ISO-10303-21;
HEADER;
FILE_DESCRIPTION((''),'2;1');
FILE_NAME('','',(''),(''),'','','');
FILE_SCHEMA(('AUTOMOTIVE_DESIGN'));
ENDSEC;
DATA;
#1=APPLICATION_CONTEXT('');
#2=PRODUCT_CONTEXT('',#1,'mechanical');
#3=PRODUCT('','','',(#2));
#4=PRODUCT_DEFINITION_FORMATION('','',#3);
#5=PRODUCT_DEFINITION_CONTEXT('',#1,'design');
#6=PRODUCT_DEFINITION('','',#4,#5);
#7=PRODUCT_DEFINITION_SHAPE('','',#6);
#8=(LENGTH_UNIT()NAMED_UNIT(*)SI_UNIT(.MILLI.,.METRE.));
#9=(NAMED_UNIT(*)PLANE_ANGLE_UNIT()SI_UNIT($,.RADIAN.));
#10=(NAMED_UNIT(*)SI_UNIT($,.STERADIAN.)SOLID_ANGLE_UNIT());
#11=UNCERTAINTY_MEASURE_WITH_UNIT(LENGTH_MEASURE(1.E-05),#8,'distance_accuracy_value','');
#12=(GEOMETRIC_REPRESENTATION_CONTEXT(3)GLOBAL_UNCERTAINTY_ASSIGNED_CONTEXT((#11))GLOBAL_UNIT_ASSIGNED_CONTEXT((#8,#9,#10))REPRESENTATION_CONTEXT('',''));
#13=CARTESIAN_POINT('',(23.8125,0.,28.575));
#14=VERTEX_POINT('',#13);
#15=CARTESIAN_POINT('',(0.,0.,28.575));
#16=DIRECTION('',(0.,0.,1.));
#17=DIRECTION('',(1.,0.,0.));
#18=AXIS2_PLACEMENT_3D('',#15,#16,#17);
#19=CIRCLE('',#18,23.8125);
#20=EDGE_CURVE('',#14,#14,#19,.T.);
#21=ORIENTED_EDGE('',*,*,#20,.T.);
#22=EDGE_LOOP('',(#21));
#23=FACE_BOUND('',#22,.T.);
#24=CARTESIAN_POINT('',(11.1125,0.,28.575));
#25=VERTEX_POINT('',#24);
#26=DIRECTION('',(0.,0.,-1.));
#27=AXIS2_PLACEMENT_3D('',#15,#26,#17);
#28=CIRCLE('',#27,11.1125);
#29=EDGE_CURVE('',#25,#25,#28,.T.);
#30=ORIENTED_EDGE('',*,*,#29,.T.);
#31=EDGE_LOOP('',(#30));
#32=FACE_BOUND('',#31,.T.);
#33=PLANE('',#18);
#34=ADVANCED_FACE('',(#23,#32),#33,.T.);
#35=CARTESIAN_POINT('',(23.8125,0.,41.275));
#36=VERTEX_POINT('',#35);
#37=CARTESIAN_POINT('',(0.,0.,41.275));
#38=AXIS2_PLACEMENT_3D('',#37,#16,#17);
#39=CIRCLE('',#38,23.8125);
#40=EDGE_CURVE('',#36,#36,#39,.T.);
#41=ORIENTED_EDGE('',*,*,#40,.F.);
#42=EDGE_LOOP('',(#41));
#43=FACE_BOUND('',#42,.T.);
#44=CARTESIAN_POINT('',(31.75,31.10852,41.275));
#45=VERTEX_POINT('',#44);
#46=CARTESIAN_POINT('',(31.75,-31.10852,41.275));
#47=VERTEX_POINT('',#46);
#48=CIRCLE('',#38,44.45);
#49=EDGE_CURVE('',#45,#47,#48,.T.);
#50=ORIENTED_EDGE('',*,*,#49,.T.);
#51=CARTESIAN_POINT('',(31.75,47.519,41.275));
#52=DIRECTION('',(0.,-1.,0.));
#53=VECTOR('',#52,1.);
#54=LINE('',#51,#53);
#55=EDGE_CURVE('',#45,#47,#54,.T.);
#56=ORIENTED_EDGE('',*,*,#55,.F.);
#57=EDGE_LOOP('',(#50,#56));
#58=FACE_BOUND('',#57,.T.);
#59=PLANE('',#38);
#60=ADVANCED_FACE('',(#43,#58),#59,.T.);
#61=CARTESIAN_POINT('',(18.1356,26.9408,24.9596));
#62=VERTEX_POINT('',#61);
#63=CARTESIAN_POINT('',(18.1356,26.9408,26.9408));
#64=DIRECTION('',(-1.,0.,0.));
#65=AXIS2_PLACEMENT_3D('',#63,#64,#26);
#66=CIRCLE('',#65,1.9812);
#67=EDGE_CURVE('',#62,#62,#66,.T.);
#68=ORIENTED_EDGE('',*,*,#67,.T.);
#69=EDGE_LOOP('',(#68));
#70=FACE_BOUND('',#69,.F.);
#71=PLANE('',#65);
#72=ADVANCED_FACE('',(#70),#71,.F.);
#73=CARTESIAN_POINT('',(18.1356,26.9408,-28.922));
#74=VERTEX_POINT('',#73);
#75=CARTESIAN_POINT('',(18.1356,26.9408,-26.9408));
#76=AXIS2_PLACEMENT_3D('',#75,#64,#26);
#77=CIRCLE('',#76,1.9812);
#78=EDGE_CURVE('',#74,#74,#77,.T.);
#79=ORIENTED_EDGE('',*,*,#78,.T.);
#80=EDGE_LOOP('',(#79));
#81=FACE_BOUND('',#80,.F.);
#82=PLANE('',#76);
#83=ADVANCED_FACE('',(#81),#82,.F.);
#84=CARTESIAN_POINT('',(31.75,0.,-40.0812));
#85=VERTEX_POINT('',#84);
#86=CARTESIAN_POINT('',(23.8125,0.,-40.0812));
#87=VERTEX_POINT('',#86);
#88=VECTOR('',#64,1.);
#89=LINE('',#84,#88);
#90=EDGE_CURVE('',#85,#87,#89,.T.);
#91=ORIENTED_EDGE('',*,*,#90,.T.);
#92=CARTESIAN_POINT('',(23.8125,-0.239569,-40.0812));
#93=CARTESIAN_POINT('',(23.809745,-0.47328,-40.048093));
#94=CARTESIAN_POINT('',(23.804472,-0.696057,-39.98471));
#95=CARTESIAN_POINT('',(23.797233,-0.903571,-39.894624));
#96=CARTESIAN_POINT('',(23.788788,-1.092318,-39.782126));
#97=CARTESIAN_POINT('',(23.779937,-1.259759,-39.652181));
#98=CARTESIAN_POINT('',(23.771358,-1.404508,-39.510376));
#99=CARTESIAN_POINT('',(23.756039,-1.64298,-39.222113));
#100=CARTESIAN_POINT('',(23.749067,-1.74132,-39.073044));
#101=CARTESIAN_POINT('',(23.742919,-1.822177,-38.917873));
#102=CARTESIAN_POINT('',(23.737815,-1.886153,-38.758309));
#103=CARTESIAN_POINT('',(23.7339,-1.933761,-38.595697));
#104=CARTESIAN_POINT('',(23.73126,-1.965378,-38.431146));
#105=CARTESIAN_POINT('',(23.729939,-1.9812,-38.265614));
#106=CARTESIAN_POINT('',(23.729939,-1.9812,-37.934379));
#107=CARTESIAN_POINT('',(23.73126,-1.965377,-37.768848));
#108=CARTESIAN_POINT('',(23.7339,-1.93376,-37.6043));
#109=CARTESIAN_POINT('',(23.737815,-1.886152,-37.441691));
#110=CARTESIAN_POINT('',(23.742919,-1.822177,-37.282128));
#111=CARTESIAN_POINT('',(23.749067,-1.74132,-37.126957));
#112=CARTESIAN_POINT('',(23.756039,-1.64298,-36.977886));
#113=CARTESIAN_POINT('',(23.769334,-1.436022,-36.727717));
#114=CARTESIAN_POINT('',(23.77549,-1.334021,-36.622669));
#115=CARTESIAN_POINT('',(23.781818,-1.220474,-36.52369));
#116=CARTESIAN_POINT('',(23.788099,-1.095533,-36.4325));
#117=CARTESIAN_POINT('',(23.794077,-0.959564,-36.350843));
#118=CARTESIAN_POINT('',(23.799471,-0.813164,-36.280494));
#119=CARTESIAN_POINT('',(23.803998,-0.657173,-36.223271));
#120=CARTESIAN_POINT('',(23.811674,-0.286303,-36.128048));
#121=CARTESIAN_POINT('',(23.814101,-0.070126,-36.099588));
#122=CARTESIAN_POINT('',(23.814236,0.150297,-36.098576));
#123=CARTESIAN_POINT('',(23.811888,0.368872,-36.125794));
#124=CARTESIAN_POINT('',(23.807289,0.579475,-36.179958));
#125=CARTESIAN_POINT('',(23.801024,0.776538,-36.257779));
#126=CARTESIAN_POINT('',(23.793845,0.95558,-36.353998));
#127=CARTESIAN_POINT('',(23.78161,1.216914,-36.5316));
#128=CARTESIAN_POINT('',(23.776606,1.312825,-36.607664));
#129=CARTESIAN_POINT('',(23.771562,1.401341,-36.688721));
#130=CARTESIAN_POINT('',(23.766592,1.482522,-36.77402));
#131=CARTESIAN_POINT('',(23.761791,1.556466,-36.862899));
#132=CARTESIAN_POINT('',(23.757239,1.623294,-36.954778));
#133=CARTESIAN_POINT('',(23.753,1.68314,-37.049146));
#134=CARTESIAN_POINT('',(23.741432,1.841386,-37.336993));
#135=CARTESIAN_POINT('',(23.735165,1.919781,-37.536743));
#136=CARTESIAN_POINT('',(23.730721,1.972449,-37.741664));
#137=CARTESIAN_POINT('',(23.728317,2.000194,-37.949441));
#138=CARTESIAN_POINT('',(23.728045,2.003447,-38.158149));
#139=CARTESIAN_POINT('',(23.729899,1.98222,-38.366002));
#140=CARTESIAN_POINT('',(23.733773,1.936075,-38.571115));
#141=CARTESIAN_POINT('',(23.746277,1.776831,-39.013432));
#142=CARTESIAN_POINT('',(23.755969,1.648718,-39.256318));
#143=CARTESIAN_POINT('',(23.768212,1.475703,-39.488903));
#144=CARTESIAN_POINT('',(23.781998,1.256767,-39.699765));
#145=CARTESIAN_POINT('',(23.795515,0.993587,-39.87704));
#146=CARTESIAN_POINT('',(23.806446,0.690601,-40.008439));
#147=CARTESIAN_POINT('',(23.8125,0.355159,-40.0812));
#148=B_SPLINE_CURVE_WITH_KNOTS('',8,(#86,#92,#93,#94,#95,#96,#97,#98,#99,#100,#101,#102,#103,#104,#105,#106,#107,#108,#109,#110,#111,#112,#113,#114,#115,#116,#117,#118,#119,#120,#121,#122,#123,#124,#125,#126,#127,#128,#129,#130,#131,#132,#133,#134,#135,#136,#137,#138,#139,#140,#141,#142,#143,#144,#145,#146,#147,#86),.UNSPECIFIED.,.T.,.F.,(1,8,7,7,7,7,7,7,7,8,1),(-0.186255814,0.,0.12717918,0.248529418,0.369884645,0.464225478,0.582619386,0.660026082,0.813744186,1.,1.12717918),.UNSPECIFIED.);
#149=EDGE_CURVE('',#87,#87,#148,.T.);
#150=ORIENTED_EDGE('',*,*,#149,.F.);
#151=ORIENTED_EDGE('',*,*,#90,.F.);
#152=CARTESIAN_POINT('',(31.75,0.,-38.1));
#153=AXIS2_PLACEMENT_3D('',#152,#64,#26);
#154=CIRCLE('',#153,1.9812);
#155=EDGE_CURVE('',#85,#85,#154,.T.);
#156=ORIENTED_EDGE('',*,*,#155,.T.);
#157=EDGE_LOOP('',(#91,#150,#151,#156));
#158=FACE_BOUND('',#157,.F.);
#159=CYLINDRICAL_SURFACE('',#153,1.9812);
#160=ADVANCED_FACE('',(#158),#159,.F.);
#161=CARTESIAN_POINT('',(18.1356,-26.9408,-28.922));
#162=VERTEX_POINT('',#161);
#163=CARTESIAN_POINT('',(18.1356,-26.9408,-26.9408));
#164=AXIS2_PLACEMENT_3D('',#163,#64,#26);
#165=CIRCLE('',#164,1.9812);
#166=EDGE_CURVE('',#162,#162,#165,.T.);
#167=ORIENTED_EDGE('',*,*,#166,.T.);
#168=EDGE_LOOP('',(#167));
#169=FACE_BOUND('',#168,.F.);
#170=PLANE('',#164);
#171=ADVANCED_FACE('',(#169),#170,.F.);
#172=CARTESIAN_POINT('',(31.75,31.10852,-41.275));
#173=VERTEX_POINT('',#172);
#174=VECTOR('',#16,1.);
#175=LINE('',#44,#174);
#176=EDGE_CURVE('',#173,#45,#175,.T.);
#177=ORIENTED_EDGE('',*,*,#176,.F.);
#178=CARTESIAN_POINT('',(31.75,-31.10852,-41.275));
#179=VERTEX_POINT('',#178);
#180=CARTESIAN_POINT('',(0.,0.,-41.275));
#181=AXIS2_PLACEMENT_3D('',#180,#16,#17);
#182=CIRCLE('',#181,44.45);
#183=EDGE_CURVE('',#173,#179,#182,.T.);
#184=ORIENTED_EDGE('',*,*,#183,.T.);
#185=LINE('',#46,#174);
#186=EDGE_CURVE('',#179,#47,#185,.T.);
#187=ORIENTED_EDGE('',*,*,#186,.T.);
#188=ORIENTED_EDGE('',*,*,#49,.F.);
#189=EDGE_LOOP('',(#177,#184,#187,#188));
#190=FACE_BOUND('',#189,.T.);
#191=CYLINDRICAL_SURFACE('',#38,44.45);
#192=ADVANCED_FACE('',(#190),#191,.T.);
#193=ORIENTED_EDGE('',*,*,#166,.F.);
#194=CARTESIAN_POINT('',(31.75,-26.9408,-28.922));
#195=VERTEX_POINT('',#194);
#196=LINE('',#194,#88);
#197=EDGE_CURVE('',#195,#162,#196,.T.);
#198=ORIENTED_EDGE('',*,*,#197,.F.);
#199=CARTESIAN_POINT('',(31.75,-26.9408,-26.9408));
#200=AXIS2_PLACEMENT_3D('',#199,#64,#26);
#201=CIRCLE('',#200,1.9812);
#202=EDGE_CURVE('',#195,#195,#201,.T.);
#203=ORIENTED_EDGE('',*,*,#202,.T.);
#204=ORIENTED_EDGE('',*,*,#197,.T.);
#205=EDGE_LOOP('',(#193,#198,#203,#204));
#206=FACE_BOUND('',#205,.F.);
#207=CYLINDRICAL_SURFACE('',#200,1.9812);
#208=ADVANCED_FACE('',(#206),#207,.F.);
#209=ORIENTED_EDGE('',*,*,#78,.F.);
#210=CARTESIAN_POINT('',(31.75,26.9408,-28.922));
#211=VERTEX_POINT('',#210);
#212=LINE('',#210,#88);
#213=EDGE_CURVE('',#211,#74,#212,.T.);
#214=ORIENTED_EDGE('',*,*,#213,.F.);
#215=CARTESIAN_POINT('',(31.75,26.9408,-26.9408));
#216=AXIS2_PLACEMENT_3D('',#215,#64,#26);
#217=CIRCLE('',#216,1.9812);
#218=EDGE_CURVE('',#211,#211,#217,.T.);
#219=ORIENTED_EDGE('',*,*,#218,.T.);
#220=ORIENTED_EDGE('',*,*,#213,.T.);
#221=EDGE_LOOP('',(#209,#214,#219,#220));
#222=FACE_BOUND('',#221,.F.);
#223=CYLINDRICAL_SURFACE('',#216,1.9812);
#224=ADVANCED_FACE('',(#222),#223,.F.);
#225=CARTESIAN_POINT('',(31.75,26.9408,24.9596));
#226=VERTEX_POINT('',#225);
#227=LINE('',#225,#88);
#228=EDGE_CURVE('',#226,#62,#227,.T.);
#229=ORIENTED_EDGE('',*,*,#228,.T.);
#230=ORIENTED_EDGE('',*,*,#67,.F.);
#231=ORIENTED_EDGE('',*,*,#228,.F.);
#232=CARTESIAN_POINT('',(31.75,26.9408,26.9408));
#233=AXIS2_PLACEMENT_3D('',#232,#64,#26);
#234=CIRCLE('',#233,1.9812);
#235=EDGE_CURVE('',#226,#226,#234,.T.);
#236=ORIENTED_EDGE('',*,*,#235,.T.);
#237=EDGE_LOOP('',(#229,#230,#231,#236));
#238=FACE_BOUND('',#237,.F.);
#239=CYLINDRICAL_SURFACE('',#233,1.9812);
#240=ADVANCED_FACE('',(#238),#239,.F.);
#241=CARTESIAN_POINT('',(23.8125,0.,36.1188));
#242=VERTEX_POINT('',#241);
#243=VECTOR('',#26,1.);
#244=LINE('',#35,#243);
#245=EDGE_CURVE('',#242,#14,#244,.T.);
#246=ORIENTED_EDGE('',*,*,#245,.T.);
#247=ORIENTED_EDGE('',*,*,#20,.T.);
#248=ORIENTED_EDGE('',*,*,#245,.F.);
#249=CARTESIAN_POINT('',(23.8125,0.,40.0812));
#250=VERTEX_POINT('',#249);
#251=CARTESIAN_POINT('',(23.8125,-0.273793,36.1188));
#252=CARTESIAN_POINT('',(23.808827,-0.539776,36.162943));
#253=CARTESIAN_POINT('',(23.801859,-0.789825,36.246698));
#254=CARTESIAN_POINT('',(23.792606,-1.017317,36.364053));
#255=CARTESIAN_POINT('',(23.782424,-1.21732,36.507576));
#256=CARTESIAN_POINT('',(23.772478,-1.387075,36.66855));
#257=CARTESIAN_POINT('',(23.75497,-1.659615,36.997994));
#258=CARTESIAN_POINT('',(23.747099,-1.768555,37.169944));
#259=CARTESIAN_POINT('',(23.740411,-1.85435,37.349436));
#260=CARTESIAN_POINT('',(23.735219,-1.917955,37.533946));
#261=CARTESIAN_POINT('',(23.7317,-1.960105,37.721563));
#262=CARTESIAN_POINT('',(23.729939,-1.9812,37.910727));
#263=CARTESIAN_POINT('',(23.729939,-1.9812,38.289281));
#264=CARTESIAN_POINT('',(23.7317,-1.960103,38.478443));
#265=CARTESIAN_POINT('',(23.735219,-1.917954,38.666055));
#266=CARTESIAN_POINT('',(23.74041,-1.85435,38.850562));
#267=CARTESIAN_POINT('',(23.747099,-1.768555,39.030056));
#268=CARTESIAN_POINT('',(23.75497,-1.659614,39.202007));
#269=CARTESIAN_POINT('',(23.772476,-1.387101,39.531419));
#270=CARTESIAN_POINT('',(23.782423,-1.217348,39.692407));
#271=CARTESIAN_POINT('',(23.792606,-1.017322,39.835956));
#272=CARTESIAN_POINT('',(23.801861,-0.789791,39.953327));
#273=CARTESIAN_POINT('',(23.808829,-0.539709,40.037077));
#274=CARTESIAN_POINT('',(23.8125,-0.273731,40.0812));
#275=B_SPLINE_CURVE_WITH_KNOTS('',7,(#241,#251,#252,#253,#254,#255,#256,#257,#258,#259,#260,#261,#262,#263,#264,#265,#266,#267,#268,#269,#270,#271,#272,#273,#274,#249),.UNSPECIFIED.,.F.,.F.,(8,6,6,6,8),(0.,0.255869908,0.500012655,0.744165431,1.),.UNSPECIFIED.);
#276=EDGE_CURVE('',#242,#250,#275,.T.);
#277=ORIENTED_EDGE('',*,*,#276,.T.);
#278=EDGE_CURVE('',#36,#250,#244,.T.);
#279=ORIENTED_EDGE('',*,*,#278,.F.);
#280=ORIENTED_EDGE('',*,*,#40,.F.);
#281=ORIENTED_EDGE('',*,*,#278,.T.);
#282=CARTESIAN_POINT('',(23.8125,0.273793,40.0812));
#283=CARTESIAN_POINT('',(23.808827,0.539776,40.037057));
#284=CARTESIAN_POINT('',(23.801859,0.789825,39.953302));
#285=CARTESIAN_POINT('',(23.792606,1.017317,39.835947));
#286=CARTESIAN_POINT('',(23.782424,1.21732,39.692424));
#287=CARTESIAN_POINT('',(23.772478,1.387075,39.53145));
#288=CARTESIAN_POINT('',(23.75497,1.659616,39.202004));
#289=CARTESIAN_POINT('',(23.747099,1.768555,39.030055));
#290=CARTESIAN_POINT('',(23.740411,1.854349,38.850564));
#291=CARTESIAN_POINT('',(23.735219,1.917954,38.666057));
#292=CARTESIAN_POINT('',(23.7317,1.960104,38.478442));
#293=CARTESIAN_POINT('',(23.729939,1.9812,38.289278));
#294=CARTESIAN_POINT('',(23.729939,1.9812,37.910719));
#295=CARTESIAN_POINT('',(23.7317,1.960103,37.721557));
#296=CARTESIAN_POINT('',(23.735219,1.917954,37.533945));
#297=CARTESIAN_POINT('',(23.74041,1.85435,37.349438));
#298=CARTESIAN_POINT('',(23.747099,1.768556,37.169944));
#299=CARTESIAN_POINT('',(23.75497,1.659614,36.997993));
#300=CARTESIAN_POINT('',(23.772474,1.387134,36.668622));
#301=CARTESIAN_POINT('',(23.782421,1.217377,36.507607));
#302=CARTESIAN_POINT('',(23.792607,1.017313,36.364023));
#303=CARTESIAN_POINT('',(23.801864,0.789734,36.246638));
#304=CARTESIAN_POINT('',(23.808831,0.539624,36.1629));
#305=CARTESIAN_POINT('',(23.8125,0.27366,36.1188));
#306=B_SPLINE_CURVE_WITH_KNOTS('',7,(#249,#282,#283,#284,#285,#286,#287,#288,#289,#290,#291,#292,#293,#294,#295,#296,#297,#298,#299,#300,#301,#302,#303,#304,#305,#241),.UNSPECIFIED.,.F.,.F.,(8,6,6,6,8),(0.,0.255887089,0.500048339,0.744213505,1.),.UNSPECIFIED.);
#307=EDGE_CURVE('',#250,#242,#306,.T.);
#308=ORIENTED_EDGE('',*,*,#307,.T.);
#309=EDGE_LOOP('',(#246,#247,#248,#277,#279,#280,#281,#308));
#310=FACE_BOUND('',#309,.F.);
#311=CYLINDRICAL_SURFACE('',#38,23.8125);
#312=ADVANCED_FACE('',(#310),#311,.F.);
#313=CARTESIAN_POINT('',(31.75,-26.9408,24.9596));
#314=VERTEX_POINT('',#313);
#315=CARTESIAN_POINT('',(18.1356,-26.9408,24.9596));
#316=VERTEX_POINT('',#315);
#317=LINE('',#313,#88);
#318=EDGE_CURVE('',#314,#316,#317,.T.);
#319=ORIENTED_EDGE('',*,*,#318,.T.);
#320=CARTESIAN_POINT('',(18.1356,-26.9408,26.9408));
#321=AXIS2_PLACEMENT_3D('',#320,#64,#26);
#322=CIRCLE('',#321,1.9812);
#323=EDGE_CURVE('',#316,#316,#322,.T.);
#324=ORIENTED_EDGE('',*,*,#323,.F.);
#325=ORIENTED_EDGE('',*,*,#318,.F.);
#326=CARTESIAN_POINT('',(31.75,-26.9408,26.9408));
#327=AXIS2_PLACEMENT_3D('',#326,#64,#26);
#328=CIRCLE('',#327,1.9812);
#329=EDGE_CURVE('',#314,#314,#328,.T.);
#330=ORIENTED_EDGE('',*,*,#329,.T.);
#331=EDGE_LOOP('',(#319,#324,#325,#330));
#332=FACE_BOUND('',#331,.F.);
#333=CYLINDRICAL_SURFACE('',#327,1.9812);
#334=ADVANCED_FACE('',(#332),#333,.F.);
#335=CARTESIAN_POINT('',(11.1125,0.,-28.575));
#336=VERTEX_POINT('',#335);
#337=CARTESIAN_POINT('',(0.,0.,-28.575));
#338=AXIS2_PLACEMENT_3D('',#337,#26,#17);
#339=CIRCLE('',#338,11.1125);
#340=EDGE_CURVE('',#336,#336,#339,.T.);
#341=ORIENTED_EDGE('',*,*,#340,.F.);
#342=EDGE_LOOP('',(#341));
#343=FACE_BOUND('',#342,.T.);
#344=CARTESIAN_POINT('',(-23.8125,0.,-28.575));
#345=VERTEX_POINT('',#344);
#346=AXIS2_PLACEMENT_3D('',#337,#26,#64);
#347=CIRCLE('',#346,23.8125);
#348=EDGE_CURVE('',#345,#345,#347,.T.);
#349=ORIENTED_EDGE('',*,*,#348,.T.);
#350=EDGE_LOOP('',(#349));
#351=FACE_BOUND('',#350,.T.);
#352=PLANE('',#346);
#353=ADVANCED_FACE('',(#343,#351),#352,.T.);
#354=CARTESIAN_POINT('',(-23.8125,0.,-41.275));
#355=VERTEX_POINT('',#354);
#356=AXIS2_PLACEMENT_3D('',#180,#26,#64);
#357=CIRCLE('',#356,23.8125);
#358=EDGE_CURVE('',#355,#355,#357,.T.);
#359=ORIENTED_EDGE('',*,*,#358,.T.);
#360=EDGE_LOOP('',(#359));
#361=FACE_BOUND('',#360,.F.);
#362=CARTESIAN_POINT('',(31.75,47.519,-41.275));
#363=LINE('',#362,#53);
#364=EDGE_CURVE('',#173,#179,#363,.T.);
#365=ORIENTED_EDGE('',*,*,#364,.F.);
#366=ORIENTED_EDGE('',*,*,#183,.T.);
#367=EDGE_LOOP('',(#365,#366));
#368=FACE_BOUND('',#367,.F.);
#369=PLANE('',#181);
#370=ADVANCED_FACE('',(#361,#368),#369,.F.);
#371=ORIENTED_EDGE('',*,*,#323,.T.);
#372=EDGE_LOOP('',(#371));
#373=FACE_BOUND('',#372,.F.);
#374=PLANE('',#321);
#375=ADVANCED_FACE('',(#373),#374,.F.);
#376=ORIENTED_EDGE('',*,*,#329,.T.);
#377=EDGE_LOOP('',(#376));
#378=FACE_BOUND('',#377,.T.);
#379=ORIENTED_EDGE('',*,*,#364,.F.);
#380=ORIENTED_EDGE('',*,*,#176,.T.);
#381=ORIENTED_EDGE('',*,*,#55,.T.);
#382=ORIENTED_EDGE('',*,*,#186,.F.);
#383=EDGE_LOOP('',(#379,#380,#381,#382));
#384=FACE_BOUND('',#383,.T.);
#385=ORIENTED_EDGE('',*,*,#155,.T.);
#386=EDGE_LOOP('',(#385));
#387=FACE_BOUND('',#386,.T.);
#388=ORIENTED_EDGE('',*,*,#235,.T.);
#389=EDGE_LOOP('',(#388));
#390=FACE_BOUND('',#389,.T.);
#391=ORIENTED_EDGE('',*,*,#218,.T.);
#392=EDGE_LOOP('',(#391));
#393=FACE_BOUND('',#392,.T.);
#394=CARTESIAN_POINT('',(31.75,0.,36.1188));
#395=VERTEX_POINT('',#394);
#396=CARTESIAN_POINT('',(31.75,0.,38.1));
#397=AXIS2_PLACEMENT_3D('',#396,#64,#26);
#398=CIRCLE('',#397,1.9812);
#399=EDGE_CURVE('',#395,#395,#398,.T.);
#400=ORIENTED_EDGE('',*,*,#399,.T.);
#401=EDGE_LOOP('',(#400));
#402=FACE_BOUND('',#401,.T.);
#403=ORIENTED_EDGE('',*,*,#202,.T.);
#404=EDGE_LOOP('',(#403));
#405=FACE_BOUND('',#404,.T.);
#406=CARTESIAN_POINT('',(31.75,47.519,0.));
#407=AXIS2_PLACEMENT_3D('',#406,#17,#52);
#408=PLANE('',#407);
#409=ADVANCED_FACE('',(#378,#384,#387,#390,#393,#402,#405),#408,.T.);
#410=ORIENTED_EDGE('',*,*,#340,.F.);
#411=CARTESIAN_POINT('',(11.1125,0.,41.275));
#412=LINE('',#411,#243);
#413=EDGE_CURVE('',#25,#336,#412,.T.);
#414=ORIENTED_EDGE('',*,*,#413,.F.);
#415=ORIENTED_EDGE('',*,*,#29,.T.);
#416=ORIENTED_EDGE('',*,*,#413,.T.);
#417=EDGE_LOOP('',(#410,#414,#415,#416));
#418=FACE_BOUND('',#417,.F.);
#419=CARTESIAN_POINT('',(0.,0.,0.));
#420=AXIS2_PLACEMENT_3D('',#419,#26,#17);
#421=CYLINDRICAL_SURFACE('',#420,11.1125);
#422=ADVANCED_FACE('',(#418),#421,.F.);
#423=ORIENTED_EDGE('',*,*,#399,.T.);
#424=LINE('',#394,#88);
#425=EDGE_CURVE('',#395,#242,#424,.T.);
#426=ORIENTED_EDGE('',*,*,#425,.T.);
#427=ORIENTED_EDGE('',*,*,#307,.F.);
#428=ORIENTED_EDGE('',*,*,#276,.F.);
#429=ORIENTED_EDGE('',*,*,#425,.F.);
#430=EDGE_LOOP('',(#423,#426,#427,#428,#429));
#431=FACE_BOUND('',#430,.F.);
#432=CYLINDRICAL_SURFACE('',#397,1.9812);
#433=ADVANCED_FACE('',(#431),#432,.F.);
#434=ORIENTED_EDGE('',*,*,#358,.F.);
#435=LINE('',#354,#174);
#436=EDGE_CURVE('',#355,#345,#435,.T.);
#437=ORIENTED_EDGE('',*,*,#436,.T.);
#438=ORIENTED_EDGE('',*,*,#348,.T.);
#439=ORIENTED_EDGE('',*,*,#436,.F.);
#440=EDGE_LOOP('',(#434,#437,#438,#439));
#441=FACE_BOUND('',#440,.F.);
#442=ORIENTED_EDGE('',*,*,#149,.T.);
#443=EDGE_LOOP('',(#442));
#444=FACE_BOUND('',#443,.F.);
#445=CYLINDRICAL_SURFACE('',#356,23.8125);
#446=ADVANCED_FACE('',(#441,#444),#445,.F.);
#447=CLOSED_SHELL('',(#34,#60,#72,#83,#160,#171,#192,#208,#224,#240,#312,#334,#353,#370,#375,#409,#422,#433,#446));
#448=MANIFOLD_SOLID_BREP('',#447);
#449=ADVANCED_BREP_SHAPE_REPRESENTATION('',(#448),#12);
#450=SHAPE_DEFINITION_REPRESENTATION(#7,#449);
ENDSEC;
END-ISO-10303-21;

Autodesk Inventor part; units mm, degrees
ref_plane "YZ Plane" through (0, 0, 0) normal (1, 0, 0) x (0, 1, 0)
ref_plane "XZ Plane" through (0, 0, 0) normal (0, 1, 0) x (-1, 0, 0)
ref_plane "XY Plane" through (0, 0, 0) normal (0, 0, 1) x (1, 0, 0)
sketch "Sketch1" plane through (0, 0, 0) normal (0, 0, 1) x (1, 0, 0)
  circle A0 centre (0, 0) radius 11.1125
  circle A1 centre (0, 0) radius 57.15 construction
  line L0 (29.571, 44.45) -> (35.921, 44.45) construction
  line L1 (35.921, 44.45) -> (35.921, -44.45) construction
  line L2 (35.921, -44.45) -> (29.571, -44.45) construction
  line L3 (29.571, -44.45) -> (29.571, 44.45) construction
  line L4 (31.75, 47.519) -> (31.75, -47.519)
  arc A2 (31.75, 47.519) -> (31.75, -47.519) centre (0, 0) ccw
  point P0 (29.571, 0)
  point P1 (57.15, 0)
  point P2 (35.921, 0)
  dimension "d0" = 22.225
  dimension "d2" = 114.3
  dimension "d3" = 88.9
  dimension "d4" = 6.35
  dimension "d5" = 35.921
  dimension "d6" = 21.229
  dimension "d7" = 31.75
extrude "Extrusion1" add sketch "Sketch1" along normal mid plane 82.55
sketch "Sketch3" plane through (0, 0, 41.275) normal (0, 0, 1) x (1, 0, 0)
  circle A0 centre (0, 0) radius 11.1125 construction
  arc A1 (31.75, 47.519) -> (31.75, -47.519) centre (0, 0) ccw construction
  line L0 (31.75, 47.519) -> (31.75, -47.519) construction
  circle A2 centre (0, 0) radius 11.1125 construction
  circle A3 centre (0, 0) radius 23.8125
  dimension "d10" = 47.625
extrude "Extrusion2" cut sketch "Sketch3" against normal blind 12.7
sketch "Sketch4" plane through (0, 0, -41.275) normal (0, 0, -1) x (-1, 0, 0)
  circle A0 centre (0, 0) radius 23.8125
  dimension "d13" = 47.625
extrude "Extrusion3" cut sketch "Sketch4" against normal blind 12.7
sketch "Sketch5" plane through (31.75, -47.519, 41.275) normal (1, 0, 0) x (0, 0, -1)
  line L0 (82.55, 95.0381) -> (82.55, 0) construction
  line L1 (82.55, 0) -> (0, 0) construction
  line L2 (0, 0) -> (0, 95.0381) construction
  line L3 (0, 95.0381) -> (82.55, 95.0381) construction
  circle A0 centre (41.275, 47.519) radius 38.1 construction
  point P0 (41.275, 85.619)
  point P1 (14.3342, 74.4598)
  point P2 (3.175, 47.519)
  point P3 (14.3342, 20.5783)
  point P4 (41.275, 9.419)
  point P5 (68.2158, 20.5783)
  point P6 (79.375, 47.519)
  point P7 (68.2158, 74.4598)
  dimension "d16" = 76.2
  dimension "d32" = 360
hole "Hole1" at (31.75, 26.9408, -26.9408) at (31.75, 0, -38.1) at (31.75, 26.9408, 26.9408) at (31.75, 0, 38.1) at (31.75, -26.9408, 26.9408) at (31.75, -26.9408, -26.9408) direction (-1, 0, 0) diameter 3.9624 depth 13.6144 thread size "10-32 UNF" class "2B" standard "ANSI Unified Screw Threads"
pattern_circular "Circular Pattern1" [suppressed]
sketch "Sketch6" plane through (0, 0, 41.275) normal (0, 0, 1) x (1, 0, 0)
  circle A0 centre (0, 0) radius 23.8125 construction
  arc A1 (31.75, 47.519) -> (31.75, -47.519) centre (0, 0) ccw construction
  line L0 (31.75, 47.519) -> (31.75, -47.519) construction
  circle A2 centre (0, 0) radius 44.45
  circle A3 centre (0, 0) radius 57.15
  arc A4 (31.75, 47.519) -> (31.75, -47.519) centre (0, 0) ccw construction
  dimension "d27" = 12.7
extrude "Extrusion4" cut sketch "Sketch6" against normal through all
equation "\"d13\" = d10"
equation "\"d14\" = d11"
equation "\"d11\" = 12.7"
properties part number "EL2-A-004" material "Aluminum 6061"
